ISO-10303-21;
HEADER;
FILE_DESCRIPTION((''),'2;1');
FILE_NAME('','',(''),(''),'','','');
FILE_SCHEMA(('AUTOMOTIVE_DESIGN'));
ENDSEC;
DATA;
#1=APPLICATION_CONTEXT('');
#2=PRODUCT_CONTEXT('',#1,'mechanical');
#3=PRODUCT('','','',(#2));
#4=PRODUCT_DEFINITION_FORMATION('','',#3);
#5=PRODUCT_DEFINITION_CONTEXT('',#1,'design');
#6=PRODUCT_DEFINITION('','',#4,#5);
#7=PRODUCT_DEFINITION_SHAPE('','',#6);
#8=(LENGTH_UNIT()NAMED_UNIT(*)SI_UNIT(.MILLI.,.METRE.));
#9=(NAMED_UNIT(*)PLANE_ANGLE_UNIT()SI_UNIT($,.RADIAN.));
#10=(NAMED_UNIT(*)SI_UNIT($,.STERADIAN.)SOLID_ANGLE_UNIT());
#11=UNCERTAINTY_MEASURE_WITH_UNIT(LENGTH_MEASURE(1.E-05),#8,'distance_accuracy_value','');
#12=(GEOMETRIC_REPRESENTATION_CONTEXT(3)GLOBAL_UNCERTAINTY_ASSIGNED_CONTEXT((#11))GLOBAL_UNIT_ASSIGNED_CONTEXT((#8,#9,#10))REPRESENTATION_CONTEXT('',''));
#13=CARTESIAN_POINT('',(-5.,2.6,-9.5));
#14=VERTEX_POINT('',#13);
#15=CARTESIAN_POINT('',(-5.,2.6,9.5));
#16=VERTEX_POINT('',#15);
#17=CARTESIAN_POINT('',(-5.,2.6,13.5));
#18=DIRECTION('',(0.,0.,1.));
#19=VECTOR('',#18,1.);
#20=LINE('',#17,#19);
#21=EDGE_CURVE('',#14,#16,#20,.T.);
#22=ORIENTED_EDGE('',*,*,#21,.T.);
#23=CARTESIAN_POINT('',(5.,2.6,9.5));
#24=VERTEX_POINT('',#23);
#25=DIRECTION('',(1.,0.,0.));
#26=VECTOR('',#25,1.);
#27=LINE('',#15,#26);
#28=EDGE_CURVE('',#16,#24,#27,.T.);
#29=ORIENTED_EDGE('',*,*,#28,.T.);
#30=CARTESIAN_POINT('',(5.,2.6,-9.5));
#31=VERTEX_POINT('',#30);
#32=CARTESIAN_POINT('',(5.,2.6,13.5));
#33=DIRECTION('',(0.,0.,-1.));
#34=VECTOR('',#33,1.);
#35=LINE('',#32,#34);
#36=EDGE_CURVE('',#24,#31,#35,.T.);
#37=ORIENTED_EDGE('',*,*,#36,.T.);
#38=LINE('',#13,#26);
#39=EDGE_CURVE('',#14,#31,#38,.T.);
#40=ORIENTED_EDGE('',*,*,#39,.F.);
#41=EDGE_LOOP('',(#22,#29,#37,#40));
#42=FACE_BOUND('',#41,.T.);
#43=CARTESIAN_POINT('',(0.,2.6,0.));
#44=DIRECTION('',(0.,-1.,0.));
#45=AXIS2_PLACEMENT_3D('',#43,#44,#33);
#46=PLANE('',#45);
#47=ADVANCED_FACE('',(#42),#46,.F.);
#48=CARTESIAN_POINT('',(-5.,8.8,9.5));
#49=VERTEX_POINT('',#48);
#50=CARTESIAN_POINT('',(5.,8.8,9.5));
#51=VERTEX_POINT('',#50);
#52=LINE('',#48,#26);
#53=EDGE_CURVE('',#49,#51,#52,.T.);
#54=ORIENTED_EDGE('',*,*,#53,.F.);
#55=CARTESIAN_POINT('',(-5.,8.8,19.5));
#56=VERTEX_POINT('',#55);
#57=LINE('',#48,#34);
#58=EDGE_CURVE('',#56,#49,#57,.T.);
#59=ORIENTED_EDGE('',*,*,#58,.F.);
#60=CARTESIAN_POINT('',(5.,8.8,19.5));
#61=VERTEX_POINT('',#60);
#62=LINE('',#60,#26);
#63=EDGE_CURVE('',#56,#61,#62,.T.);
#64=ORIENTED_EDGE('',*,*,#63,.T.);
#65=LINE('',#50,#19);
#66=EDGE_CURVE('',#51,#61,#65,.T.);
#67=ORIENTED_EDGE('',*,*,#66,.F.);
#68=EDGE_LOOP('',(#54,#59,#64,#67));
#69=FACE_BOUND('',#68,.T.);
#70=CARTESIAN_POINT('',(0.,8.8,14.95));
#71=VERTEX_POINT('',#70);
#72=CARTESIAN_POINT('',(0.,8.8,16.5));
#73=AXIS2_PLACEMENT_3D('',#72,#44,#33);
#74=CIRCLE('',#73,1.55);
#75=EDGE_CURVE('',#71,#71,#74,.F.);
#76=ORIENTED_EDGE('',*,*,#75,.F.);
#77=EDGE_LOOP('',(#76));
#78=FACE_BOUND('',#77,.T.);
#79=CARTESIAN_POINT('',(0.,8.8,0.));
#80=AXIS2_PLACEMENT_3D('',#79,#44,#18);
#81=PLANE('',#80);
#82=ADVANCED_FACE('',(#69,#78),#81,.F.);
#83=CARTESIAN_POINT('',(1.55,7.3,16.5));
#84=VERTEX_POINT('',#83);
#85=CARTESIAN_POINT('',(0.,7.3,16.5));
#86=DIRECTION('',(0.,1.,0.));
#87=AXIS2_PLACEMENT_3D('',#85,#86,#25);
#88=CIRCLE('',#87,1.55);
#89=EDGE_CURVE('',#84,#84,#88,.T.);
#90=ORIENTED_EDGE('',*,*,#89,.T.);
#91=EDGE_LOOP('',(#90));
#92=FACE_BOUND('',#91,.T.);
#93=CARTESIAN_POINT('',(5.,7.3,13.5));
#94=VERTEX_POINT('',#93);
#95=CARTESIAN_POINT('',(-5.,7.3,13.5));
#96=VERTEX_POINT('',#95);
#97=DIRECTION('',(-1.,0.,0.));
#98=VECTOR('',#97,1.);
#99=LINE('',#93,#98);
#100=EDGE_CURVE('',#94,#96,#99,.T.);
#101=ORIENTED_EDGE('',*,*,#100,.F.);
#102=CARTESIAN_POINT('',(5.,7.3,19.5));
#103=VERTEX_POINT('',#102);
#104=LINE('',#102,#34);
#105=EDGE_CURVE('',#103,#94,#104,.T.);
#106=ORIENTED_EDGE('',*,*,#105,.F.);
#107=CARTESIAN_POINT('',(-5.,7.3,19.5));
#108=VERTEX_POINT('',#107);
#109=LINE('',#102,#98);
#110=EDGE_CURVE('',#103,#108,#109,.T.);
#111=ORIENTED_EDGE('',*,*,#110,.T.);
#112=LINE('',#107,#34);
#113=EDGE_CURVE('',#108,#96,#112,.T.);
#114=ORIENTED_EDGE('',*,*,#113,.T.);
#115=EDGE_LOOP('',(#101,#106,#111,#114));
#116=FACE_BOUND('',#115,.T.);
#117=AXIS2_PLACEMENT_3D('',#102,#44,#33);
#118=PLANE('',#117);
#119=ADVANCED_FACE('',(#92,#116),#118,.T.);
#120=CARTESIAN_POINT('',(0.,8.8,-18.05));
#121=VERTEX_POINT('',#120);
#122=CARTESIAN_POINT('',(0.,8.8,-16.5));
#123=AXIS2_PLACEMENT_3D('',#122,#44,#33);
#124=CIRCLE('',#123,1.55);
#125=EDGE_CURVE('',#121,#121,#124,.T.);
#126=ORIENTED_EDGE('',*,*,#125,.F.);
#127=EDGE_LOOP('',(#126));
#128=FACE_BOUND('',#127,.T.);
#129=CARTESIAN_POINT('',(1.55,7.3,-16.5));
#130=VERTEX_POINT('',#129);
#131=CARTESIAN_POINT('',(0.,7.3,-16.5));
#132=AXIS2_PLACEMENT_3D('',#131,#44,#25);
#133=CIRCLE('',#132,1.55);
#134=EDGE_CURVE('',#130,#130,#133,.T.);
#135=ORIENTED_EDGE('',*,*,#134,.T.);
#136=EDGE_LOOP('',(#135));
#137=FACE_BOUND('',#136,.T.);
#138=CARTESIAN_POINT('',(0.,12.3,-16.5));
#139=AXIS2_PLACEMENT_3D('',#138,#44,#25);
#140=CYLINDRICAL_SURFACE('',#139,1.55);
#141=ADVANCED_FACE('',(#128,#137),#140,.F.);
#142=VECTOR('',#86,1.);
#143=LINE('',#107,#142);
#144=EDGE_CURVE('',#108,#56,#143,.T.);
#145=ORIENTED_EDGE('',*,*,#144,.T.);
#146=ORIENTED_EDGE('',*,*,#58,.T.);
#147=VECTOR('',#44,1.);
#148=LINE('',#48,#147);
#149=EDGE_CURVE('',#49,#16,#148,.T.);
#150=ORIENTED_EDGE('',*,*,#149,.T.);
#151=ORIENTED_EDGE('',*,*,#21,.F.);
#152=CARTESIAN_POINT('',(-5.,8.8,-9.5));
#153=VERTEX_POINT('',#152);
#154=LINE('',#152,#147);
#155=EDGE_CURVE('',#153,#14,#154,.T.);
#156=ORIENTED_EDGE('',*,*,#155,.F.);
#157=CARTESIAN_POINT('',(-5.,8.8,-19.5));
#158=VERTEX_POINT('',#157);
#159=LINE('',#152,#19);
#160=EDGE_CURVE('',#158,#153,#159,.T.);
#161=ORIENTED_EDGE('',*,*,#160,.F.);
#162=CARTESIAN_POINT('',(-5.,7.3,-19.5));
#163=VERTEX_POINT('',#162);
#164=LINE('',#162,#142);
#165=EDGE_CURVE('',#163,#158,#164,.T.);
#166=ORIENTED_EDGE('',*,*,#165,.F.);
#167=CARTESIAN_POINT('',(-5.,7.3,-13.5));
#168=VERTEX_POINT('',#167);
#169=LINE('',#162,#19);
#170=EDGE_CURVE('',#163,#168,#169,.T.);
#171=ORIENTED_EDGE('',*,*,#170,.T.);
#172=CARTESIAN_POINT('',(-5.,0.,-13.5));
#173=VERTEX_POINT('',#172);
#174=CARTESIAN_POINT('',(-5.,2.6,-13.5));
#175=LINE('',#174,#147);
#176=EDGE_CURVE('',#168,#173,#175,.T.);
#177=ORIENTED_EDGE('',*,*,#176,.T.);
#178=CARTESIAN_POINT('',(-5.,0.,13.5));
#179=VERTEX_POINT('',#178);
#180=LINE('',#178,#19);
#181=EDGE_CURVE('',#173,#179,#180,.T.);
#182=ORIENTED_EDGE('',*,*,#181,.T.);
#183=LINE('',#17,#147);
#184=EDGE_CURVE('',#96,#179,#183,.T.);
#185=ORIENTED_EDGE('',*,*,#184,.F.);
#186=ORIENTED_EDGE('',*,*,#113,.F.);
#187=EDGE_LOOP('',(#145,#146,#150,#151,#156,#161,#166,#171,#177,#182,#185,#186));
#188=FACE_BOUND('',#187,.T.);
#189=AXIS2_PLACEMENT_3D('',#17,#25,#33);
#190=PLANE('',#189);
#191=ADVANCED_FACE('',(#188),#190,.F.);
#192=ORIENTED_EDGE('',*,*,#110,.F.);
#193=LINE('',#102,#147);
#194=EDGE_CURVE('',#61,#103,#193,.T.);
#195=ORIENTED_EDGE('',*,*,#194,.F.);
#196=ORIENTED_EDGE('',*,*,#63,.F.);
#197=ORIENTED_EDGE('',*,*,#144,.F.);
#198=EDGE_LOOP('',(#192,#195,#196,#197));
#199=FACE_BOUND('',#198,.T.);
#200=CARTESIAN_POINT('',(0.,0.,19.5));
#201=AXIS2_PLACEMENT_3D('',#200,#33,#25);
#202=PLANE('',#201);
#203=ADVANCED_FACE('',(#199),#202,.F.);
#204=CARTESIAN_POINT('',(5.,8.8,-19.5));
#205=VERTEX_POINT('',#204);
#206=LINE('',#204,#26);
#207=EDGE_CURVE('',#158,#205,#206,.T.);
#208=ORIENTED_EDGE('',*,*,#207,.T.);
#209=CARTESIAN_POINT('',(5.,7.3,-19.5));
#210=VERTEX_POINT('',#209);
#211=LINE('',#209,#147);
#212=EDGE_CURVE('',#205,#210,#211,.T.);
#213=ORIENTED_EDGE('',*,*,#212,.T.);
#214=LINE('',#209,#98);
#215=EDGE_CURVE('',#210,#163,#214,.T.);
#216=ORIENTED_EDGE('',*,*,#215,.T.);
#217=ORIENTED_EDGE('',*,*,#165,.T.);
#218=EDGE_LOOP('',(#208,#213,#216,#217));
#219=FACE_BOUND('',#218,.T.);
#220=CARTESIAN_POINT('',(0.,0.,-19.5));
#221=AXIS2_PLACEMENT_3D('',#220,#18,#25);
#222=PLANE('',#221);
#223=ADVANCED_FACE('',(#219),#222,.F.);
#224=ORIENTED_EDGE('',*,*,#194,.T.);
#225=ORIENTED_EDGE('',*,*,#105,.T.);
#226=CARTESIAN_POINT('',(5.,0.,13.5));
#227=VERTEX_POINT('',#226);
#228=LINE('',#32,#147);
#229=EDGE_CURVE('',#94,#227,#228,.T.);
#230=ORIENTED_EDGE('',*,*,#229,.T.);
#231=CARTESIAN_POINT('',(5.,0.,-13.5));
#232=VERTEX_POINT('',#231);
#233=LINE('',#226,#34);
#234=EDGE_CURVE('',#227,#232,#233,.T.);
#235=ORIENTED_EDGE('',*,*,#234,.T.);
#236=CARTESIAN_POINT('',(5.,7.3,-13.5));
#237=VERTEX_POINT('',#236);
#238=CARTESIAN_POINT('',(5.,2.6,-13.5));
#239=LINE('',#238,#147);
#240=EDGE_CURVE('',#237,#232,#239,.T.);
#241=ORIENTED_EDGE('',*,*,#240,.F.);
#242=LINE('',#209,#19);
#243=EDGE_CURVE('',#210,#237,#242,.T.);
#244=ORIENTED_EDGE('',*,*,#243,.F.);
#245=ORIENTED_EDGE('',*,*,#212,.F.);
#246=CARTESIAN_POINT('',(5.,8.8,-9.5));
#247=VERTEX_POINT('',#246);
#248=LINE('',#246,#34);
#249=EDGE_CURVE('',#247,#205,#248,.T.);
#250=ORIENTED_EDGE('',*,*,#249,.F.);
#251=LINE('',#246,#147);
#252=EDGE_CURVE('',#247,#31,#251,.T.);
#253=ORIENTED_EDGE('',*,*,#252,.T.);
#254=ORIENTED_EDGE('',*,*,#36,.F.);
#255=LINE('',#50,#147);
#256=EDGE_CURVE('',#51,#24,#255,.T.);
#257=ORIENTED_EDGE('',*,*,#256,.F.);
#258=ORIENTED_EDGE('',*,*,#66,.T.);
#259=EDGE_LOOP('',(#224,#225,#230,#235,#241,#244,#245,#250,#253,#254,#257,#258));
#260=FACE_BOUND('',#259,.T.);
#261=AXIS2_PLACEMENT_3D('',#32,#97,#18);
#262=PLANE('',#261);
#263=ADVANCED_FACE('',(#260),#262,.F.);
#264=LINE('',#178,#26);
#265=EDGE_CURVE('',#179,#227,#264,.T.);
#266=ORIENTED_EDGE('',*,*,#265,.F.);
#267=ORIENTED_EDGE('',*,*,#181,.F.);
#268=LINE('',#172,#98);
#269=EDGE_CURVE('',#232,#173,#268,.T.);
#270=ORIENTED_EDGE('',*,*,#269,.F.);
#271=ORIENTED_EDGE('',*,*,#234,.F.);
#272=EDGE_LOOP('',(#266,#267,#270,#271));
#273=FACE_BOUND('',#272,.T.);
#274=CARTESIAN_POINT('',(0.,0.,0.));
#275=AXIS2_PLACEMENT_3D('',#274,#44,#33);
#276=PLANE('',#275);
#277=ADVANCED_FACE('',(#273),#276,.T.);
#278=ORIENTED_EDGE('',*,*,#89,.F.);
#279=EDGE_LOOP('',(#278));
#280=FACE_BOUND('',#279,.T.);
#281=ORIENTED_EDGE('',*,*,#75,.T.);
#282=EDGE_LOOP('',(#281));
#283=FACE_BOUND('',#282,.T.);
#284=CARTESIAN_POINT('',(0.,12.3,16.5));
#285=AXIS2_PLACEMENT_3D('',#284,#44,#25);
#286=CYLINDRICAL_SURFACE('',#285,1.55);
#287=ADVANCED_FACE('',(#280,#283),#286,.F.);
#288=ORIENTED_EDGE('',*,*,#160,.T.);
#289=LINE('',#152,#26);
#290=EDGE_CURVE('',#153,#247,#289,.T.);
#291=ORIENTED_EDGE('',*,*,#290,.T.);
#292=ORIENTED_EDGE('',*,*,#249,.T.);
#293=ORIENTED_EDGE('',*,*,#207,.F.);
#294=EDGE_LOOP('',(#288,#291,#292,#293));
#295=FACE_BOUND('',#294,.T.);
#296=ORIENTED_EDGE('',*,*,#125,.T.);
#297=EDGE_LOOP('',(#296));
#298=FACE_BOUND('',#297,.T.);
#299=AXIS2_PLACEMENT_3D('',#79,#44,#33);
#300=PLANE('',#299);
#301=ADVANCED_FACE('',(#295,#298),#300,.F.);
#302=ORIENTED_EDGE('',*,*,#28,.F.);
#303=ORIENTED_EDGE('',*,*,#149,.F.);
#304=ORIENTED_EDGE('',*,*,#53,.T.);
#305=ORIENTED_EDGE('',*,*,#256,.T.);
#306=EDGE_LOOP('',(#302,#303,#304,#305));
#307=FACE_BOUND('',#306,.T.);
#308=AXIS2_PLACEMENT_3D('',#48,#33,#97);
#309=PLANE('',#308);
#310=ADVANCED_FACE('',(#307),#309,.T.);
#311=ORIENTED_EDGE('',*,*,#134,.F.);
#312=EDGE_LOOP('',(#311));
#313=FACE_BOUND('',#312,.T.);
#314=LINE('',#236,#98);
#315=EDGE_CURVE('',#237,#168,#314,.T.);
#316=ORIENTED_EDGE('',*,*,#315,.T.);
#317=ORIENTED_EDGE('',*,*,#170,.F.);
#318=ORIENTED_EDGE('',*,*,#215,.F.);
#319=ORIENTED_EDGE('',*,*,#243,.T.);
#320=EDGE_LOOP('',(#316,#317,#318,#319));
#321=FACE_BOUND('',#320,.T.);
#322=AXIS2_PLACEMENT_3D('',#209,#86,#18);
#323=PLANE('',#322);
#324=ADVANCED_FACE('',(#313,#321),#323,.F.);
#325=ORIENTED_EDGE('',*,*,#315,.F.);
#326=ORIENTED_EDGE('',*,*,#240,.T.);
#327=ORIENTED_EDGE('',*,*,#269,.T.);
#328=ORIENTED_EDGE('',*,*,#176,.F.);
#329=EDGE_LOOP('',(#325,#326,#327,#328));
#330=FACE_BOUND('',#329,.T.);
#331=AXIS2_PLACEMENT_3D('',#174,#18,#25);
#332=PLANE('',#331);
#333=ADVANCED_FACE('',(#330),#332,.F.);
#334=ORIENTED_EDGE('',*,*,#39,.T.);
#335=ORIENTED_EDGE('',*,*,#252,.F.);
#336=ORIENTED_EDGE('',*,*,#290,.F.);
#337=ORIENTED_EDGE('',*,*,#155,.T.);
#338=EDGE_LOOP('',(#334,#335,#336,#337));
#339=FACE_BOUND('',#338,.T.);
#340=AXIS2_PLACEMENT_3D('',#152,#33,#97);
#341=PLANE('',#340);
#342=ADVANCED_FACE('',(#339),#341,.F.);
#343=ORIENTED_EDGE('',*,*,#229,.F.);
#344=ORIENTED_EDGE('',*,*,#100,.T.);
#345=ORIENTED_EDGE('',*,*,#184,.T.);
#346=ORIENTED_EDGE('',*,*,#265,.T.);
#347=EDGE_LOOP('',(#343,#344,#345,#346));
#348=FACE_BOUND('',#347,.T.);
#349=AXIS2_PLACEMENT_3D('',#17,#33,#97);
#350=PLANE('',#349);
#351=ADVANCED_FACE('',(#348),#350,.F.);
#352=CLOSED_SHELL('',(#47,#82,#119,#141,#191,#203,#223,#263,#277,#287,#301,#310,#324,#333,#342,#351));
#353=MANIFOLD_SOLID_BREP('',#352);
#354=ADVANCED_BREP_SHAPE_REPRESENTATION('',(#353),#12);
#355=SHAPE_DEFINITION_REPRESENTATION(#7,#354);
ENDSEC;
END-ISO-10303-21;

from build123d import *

# Parameters (mm, degrees)
CROQUIS1_W              = 10
CROQUIS1_H              = 27
SALIENTE_EXTRUIR1_DEPTH = 2.6
CROQUIS2_W              = 10
CROQUIS2_H              = 4
SALIENTE_EXTRUIR2_DEPTH = 6.2
CROQUIS3_W              = 10
CROQUIS3_H              = 1.5
SALIENTE_EXTRUIR3_DEPTH = 6
CROQUIS4_R              = 1.55
CORTAR_EXTRUIR1_DEPTH   = 5


with BuildPart() as part:
    # Croquis1 → Saliente-Extruir1 (new body)
    with BuildSketch(Plane(origin=(0, 0, 0), x_dir=(1, 0, 0), z_dir=(0, 1, 0))):
        Rectangle(CROQUIS1_W, CROQUIS1_H)
    saliente_extruir1 = extrude(amount=SALIENTE_EXTRUIR1_DEPTH)

    # Croquis2 → Saliente-Extruir2 (add)
    with BuildSketch(Plane(origin=(0, 2.6, 0), x_dir=(1, 0, 0), z_dir=(0, 1, 0))):
        with Locations((0, 11.5)):
            Rectangle(CROQUIS2_W, CROQUIS2_H)
    saliente_extruir2 = extrude(amount=SALIENTE_EXTRUIR2_DEPTH)

    # Croquis3 → Saliente-Extruir3 (add)
    with BuildSketch(Plane(origin=(0, 0, -13.5), x_dir=(-1, 0, 0), z_dir=(0, 0, -1))):
        with Locations((0, 8.05)):
            Rectangle(CROQUIS3_W, CROQUIS3_H)
    saliente_extruir3 = extrude(amount=SALIENTE_EXTRUIR3_DEPTH)

    # Croquis4 → Cortar-Extruir1 (cut)
    with BuildSketch(Plane.XZ.offset(-7.3)):
        with Locations((0, -16.5)):
            Circle(CROQUIS4_R)
    cortar_extruir1 = extrude(amount=-CORTAR_EXTRUIR1_DEPTH, mode=Mode.SUBTRACT)

    # Simetría1: Saliente-Extruir1, Saliente-Extruir2, Saliente-Extruir3, Cortar-Extruir1 across plane
    add(saliente_extruir1.mirror(Plane.XY))
    add(saliente_extruir2.mirror(Plane.XY))
    add(saliente_extruir3.mirror(Plane.XY))
    add(cortar_extruir1.mirror(Plane.XY), mode=Mode.SUBTRACT)


solid = part.part
